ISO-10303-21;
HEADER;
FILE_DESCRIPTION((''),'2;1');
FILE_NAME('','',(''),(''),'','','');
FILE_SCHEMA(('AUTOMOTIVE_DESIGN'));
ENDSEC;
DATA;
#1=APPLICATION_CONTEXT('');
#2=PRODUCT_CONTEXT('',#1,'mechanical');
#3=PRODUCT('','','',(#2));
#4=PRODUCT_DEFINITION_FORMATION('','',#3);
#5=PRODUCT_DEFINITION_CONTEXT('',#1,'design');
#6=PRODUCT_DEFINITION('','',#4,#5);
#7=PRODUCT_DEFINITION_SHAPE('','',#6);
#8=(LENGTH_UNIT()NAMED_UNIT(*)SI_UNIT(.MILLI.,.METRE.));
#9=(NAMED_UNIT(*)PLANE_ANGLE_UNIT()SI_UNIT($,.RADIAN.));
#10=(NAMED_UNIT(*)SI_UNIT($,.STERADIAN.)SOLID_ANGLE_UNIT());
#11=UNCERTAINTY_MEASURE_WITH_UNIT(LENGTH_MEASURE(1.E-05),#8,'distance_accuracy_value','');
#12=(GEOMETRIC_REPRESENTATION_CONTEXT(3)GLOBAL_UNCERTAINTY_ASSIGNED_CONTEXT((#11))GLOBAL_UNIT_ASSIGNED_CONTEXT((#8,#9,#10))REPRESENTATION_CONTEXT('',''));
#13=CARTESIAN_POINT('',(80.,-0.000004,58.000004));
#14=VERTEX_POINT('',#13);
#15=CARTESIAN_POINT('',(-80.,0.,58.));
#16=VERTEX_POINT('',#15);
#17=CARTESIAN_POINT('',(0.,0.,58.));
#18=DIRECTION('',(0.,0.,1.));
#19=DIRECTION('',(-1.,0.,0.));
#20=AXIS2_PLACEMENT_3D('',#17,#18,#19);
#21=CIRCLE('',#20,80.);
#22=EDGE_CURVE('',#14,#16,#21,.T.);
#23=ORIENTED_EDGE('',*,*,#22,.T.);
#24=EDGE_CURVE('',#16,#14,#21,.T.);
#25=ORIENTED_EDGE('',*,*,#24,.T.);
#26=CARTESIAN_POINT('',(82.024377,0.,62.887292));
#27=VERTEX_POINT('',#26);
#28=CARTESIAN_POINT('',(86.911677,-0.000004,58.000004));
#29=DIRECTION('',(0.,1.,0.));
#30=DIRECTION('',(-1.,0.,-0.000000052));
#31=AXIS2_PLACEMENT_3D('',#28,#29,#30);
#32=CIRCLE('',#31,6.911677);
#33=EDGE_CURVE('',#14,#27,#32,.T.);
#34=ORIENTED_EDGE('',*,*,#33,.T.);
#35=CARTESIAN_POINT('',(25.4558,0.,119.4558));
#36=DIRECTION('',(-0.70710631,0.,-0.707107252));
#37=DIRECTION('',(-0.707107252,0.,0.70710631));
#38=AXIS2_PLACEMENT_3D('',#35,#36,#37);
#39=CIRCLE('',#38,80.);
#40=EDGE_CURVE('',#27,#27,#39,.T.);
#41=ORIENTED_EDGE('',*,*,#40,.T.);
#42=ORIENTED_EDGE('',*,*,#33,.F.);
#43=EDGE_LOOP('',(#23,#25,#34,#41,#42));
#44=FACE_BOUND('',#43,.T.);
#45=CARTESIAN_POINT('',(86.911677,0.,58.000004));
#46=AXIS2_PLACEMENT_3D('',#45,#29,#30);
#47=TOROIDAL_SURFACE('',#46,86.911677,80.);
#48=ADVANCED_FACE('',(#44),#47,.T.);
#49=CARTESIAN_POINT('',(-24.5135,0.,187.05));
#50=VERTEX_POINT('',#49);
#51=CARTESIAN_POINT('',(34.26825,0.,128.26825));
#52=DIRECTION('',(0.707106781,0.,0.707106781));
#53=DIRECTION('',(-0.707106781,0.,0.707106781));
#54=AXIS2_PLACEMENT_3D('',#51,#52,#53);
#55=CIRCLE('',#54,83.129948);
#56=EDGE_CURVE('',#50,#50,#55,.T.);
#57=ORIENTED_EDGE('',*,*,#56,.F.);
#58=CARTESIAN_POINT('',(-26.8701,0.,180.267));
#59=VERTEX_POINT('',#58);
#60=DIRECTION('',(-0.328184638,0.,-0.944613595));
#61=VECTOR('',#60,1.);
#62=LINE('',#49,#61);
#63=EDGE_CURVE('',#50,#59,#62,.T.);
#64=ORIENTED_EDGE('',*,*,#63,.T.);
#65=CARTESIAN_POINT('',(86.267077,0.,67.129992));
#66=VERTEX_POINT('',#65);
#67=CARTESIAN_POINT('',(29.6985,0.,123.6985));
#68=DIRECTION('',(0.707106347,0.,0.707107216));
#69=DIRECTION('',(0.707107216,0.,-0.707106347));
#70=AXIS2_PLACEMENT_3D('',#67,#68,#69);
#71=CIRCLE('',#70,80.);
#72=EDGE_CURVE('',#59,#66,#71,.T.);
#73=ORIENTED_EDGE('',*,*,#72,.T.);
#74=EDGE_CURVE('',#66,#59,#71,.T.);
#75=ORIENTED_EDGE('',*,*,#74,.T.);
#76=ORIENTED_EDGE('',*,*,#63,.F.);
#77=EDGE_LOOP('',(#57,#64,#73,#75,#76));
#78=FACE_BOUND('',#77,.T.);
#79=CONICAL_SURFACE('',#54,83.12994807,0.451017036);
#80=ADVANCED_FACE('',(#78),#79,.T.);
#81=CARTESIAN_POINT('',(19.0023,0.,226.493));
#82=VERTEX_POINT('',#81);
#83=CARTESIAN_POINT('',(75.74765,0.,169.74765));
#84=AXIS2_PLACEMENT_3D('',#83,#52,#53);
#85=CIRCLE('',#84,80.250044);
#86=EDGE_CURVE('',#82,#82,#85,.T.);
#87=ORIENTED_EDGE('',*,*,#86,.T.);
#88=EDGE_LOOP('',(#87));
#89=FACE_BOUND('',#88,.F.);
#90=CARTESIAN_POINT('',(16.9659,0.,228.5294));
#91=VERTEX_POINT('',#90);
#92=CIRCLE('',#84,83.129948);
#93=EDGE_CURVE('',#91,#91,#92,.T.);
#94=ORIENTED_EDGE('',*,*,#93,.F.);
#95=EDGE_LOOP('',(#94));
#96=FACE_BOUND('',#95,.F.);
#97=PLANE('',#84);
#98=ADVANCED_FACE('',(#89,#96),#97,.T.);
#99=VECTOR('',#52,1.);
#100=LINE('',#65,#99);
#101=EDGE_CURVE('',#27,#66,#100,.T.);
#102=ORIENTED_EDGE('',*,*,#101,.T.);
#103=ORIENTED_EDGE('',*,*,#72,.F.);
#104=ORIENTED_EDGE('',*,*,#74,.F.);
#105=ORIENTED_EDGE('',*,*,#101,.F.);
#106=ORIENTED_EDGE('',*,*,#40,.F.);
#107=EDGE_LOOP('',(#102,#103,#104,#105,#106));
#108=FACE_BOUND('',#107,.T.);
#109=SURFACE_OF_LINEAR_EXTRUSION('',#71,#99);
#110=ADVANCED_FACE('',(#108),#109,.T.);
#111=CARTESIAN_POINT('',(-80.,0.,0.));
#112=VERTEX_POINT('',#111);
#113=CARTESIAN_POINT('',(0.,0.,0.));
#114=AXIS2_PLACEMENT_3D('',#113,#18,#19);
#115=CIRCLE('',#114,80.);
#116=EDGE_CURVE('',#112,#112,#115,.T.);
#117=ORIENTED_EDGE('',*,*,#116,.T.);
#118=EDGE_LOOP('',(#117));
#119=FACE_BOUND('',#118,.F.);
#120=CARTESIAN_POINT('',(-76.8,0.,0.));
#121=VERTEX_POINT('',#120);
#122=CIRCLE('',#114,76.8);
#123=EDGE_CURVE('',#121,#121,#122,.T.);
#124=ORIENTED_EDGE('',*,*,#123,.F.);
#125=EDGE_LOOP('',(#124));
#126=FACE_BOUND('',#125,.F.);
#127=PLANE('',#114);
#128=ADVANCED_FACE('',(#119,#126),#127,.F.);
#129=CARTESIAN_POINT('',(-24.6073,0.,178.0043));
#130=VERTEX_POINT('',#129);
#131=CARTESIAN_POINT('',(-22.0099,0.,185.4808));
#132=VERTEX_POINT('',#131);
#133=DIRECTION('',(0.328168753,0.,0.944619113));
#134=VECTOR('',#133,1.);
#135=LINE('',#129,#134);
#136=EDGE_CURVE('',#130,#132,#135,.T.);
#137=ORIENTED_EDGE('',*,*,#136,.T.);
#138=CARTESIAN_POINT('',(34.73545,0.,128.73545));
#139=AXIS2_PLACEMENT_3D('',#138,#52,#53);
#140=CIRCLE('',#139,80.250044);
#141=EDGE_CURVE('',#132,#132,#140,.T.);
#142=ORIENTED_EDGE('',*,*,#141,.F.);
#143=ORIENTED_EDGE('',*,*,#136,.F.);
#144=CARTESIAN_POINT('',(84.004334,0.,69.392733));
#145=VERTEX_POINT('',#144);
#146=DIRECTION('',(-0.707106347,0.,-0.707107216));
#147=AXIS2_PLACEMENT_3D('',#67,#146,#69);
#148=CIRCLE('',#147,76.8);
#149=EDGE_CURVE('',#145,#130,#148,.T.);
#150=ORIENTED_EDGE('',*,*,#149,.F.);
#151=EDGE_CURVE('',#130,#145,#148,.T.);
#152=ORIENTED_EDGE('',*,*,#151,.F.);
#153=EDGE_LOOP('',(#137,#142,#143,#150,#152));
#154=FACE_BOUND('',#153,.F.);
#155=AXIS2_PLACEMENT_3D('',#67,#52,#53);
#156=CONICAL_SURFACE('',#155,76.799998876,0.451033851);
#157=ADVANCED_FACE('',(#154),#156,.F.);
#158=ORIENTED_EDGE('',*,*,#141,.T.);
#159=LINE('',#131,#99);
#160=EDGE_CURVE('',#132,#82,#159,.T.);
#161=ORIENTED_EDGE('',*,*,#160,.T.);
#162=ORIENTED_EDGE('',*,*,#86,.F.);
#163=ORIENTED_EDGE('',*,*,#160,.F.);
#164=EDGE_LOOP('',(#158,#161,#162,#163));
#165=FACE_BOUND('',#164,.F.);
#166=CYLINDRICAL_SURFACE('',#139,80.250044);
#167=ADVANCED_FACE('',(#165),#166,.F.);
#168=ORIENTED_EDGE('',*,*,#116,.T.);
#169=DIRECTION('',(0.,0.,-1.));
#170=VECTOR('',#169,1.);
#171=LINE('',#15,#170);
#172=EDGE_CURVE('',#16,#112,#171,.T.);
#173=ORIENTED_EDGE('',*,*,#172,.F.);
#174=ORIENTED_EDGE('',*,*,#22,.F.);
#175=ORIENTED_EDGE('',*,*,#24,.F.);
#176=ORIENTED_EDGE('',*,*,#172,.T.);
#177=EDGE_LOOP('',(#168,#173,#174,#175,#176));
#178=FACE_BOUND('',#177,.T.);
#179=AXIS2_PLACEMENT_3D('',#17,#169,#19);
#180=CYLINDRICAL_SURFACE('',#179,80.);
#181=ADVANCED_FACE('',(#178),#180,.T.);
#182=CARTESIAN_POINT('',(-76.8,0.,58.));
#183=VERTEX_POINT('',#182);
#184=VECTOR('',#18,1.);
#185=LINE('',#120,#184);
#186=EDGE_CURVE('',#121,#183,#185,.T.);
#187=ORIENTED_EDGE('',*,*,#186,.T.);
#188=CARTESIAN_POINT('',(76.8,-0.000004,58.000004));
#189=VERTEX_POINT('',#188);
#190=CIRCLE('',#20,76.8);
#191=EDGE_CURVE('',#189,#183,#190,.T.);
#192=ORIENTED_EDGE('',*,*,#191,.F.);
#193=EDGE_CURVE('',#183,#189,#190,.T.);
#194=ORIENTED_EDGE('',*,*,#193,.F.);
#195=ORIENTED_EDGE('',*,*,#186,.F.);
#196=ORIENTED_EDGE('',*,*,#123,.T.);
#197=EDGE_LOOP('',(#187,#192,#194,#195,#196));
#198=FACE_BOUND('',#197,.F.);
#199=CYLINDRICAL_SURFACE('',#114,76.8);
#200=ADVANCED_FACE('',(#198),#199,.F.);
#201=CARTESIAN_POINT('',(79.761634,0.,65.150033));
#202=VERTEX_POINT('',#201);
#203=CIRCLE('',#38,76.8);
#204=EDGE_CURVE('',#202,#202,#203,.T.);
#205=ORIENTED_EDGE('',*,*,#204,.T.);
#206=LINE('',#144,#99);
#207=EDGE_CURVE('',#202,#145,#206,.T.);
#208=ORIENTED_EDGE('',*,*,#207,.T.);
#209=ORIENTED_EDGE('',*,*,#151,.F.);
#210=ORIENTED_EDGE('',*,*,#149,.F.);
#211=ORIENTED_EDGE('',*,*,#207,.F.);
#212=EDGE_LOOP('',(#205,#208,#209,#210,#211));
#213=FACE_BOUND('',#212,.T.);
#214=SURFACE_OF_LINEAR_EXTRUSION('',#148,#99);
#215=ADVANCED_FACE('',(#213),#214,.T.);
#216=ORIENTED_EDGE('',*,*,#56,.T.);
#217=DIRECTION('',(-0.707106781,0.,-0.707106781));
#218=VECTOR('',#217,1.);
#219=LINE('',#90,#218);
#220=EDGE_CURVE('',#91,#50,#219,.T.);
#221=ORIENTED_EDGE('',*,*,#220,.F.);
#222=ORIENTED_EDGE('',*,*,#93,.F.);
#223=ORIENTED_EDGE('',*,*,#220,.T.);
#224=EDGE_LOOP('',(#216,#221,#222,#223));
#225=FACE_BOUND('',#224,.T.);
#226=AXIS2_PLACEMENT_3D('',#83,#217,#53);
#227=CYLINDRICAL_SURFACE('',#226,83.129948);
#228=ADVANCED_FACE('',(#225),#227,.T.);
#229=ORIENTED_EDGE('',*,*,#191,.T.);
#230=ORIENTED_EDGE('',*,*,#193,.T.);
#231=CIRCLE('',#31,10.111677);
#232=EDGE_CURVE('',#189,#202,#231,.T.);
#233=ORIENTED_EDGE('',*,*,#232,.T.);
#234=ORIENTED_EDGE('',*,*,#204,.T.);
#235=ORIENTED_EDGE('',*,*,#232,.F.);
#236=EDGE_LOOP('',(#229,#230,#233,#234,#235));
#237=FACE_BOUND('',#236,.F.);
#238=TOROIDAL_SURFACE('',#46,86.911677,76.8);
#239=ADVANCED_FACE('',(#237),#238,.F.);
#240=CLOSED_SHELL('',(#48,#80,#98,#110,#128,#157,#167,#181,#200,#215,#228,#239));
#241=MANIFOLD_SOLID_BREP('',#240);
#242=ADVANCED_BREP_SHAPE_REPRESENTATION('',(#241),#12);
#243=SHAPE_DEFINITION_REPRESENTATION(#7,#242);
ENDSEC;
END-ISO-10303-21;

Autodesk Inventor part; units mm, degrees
ref_plane "YZ Plane" through (0, 0, 0) normal (1, 0, 0) x (0, 1, 0)
ref_plane "XZ Plane" through (0, 0, 0) normal (0, 1, 0) x (-1, 0, 0)
ref_plane "XY Plane" through (0, 0, 0) normal (0, 0, 1) x (1, 0, 0)
sketch "Sketch1" plane through (0, 0, 0) normal (0, 1, 0) x (-1, 0, 0)
  line L0 (0, 0) -> (0, 58)
  line L1 (0, 0) -> (76.8, 0) construction
  line L2 (76.8, 0) -> (76.8, 58)
  line L3 (76.8, 58) -> (80, 58)
  line L4 (80, 58) -> (80, 0)
  line L5 (80, 0) -> (76.8, 0)
  line L6 (0, 58) -> (76.8, 58) construction
  dimension "d0" = 3.2
  dimension "d1" = 58
  dimension "d2" = 160
revolve "Revolution1" add sketch "Sketch1" angle 360 about axis through (0, 0, 0) along (0, 0, 1)
sketch "Sketch2" plane through (0, 0, 0) normal (0, 1, 0) x (-1, 0, 0)
  line L0 (0, 94) -> (-29.6985, 123.6985) construction
  line L1 (-29.6985, 123.6985) -> (-75.7477, 169.7477) construction
  line L2 (-75.7477, 169.7477) -> (-19.0023, 226.493) construction
  line L3 (-19.0023, 226.493) -> (-16.9659, 228.5294)
  line L4 (-16.9659, 228.5294) -> (24.5135, 187.05)
  line L5 (24.5135, 187.05) -> (26.8701, 180.267)
  line L6 (26.8701, 180.267) -> (24.6073, 178.0043)
  line L7 (24.6073, 178.0043) -> (22.0099, 185.4808)
  line L8 (22.0099, 185.4808) -> (-19.0023, 226.493)
  line L9 (22.0099, 185.4808) -> (-34.7355, 128.7355) construction
  line L10 (-29.6985, 123.6985) -> (24.6073, 178.0043) construction
  line L11 (-29.6985, 123.6985) -> (-25.4558, 119.4558)
  line L12 (-80, 58) -> (80, 58) projected
  line L13 (0, 94) -> (0, 58) construction
  arc A0 (0, 58) -> (-25.4558, 119.4558) centre (-86.9117, 58) ccw
  dimension "d5" = 160.5
  dimension "d6" = 2.88
  dimension "d7" = 58
  dimension "d8" = 160
  dimension "d9" = 3.2
  dimension "d10" = 42
  dimension "d11" = 2.88
  dimension "d12" = 45
  dimension "d13" = 36
sketch "Sketch3" plane through (0, 0, 58) normal (0, 0, 1) x (1, 0, 0)
  circle A0 centre (0, 0) radius 76.8
  circle A1 centre (0, 0) radius 80
  circle A2 centre (0, 0) radius 80 projected
  circle A3 centre (0, 0) radius 76.8 projected
sweep "Sweep1" add profiles "Sketch3" path "Sketch2" path curves A0 L11
revolve "Revolution2" add sketch "Sketch2" angle 360 about axis through (29.6985, 0, 123.6985) along (0.7071068, 0, 0.7071068)
equation "\"d5\" = Ds"
equation "\"d6\" = e2"
equation "\"d7\" = L1"
equation "\"d8\" = De"
equation "\"d9\" = e"
equation "\"d10\" = z2"
equation "\"d11\" = e2"
equation "\"d13\" = z1"
equation "\"d0\" = e"
equation "\"d1\" = L1"
equation "\"d2\" = De"
equation "\"z1\" = 36"
equation "\"L1\" = 58"
equation "\"De\" = 160"
equation "\"e\" = 3.2"
equation "\"z2\" = 42"
equation "\"Ds\" = 160.5"
equation "\"e2\" = 0.9 * e"
equation "\"e3\" = 0.75 * e"
equation "\"Size_Designation\" = 1.2345"
properties part number "ISO 3633 45 Deg Bend with Single Socket for Cemented Type Joints DN160" material "PVC, Unplasticized"
